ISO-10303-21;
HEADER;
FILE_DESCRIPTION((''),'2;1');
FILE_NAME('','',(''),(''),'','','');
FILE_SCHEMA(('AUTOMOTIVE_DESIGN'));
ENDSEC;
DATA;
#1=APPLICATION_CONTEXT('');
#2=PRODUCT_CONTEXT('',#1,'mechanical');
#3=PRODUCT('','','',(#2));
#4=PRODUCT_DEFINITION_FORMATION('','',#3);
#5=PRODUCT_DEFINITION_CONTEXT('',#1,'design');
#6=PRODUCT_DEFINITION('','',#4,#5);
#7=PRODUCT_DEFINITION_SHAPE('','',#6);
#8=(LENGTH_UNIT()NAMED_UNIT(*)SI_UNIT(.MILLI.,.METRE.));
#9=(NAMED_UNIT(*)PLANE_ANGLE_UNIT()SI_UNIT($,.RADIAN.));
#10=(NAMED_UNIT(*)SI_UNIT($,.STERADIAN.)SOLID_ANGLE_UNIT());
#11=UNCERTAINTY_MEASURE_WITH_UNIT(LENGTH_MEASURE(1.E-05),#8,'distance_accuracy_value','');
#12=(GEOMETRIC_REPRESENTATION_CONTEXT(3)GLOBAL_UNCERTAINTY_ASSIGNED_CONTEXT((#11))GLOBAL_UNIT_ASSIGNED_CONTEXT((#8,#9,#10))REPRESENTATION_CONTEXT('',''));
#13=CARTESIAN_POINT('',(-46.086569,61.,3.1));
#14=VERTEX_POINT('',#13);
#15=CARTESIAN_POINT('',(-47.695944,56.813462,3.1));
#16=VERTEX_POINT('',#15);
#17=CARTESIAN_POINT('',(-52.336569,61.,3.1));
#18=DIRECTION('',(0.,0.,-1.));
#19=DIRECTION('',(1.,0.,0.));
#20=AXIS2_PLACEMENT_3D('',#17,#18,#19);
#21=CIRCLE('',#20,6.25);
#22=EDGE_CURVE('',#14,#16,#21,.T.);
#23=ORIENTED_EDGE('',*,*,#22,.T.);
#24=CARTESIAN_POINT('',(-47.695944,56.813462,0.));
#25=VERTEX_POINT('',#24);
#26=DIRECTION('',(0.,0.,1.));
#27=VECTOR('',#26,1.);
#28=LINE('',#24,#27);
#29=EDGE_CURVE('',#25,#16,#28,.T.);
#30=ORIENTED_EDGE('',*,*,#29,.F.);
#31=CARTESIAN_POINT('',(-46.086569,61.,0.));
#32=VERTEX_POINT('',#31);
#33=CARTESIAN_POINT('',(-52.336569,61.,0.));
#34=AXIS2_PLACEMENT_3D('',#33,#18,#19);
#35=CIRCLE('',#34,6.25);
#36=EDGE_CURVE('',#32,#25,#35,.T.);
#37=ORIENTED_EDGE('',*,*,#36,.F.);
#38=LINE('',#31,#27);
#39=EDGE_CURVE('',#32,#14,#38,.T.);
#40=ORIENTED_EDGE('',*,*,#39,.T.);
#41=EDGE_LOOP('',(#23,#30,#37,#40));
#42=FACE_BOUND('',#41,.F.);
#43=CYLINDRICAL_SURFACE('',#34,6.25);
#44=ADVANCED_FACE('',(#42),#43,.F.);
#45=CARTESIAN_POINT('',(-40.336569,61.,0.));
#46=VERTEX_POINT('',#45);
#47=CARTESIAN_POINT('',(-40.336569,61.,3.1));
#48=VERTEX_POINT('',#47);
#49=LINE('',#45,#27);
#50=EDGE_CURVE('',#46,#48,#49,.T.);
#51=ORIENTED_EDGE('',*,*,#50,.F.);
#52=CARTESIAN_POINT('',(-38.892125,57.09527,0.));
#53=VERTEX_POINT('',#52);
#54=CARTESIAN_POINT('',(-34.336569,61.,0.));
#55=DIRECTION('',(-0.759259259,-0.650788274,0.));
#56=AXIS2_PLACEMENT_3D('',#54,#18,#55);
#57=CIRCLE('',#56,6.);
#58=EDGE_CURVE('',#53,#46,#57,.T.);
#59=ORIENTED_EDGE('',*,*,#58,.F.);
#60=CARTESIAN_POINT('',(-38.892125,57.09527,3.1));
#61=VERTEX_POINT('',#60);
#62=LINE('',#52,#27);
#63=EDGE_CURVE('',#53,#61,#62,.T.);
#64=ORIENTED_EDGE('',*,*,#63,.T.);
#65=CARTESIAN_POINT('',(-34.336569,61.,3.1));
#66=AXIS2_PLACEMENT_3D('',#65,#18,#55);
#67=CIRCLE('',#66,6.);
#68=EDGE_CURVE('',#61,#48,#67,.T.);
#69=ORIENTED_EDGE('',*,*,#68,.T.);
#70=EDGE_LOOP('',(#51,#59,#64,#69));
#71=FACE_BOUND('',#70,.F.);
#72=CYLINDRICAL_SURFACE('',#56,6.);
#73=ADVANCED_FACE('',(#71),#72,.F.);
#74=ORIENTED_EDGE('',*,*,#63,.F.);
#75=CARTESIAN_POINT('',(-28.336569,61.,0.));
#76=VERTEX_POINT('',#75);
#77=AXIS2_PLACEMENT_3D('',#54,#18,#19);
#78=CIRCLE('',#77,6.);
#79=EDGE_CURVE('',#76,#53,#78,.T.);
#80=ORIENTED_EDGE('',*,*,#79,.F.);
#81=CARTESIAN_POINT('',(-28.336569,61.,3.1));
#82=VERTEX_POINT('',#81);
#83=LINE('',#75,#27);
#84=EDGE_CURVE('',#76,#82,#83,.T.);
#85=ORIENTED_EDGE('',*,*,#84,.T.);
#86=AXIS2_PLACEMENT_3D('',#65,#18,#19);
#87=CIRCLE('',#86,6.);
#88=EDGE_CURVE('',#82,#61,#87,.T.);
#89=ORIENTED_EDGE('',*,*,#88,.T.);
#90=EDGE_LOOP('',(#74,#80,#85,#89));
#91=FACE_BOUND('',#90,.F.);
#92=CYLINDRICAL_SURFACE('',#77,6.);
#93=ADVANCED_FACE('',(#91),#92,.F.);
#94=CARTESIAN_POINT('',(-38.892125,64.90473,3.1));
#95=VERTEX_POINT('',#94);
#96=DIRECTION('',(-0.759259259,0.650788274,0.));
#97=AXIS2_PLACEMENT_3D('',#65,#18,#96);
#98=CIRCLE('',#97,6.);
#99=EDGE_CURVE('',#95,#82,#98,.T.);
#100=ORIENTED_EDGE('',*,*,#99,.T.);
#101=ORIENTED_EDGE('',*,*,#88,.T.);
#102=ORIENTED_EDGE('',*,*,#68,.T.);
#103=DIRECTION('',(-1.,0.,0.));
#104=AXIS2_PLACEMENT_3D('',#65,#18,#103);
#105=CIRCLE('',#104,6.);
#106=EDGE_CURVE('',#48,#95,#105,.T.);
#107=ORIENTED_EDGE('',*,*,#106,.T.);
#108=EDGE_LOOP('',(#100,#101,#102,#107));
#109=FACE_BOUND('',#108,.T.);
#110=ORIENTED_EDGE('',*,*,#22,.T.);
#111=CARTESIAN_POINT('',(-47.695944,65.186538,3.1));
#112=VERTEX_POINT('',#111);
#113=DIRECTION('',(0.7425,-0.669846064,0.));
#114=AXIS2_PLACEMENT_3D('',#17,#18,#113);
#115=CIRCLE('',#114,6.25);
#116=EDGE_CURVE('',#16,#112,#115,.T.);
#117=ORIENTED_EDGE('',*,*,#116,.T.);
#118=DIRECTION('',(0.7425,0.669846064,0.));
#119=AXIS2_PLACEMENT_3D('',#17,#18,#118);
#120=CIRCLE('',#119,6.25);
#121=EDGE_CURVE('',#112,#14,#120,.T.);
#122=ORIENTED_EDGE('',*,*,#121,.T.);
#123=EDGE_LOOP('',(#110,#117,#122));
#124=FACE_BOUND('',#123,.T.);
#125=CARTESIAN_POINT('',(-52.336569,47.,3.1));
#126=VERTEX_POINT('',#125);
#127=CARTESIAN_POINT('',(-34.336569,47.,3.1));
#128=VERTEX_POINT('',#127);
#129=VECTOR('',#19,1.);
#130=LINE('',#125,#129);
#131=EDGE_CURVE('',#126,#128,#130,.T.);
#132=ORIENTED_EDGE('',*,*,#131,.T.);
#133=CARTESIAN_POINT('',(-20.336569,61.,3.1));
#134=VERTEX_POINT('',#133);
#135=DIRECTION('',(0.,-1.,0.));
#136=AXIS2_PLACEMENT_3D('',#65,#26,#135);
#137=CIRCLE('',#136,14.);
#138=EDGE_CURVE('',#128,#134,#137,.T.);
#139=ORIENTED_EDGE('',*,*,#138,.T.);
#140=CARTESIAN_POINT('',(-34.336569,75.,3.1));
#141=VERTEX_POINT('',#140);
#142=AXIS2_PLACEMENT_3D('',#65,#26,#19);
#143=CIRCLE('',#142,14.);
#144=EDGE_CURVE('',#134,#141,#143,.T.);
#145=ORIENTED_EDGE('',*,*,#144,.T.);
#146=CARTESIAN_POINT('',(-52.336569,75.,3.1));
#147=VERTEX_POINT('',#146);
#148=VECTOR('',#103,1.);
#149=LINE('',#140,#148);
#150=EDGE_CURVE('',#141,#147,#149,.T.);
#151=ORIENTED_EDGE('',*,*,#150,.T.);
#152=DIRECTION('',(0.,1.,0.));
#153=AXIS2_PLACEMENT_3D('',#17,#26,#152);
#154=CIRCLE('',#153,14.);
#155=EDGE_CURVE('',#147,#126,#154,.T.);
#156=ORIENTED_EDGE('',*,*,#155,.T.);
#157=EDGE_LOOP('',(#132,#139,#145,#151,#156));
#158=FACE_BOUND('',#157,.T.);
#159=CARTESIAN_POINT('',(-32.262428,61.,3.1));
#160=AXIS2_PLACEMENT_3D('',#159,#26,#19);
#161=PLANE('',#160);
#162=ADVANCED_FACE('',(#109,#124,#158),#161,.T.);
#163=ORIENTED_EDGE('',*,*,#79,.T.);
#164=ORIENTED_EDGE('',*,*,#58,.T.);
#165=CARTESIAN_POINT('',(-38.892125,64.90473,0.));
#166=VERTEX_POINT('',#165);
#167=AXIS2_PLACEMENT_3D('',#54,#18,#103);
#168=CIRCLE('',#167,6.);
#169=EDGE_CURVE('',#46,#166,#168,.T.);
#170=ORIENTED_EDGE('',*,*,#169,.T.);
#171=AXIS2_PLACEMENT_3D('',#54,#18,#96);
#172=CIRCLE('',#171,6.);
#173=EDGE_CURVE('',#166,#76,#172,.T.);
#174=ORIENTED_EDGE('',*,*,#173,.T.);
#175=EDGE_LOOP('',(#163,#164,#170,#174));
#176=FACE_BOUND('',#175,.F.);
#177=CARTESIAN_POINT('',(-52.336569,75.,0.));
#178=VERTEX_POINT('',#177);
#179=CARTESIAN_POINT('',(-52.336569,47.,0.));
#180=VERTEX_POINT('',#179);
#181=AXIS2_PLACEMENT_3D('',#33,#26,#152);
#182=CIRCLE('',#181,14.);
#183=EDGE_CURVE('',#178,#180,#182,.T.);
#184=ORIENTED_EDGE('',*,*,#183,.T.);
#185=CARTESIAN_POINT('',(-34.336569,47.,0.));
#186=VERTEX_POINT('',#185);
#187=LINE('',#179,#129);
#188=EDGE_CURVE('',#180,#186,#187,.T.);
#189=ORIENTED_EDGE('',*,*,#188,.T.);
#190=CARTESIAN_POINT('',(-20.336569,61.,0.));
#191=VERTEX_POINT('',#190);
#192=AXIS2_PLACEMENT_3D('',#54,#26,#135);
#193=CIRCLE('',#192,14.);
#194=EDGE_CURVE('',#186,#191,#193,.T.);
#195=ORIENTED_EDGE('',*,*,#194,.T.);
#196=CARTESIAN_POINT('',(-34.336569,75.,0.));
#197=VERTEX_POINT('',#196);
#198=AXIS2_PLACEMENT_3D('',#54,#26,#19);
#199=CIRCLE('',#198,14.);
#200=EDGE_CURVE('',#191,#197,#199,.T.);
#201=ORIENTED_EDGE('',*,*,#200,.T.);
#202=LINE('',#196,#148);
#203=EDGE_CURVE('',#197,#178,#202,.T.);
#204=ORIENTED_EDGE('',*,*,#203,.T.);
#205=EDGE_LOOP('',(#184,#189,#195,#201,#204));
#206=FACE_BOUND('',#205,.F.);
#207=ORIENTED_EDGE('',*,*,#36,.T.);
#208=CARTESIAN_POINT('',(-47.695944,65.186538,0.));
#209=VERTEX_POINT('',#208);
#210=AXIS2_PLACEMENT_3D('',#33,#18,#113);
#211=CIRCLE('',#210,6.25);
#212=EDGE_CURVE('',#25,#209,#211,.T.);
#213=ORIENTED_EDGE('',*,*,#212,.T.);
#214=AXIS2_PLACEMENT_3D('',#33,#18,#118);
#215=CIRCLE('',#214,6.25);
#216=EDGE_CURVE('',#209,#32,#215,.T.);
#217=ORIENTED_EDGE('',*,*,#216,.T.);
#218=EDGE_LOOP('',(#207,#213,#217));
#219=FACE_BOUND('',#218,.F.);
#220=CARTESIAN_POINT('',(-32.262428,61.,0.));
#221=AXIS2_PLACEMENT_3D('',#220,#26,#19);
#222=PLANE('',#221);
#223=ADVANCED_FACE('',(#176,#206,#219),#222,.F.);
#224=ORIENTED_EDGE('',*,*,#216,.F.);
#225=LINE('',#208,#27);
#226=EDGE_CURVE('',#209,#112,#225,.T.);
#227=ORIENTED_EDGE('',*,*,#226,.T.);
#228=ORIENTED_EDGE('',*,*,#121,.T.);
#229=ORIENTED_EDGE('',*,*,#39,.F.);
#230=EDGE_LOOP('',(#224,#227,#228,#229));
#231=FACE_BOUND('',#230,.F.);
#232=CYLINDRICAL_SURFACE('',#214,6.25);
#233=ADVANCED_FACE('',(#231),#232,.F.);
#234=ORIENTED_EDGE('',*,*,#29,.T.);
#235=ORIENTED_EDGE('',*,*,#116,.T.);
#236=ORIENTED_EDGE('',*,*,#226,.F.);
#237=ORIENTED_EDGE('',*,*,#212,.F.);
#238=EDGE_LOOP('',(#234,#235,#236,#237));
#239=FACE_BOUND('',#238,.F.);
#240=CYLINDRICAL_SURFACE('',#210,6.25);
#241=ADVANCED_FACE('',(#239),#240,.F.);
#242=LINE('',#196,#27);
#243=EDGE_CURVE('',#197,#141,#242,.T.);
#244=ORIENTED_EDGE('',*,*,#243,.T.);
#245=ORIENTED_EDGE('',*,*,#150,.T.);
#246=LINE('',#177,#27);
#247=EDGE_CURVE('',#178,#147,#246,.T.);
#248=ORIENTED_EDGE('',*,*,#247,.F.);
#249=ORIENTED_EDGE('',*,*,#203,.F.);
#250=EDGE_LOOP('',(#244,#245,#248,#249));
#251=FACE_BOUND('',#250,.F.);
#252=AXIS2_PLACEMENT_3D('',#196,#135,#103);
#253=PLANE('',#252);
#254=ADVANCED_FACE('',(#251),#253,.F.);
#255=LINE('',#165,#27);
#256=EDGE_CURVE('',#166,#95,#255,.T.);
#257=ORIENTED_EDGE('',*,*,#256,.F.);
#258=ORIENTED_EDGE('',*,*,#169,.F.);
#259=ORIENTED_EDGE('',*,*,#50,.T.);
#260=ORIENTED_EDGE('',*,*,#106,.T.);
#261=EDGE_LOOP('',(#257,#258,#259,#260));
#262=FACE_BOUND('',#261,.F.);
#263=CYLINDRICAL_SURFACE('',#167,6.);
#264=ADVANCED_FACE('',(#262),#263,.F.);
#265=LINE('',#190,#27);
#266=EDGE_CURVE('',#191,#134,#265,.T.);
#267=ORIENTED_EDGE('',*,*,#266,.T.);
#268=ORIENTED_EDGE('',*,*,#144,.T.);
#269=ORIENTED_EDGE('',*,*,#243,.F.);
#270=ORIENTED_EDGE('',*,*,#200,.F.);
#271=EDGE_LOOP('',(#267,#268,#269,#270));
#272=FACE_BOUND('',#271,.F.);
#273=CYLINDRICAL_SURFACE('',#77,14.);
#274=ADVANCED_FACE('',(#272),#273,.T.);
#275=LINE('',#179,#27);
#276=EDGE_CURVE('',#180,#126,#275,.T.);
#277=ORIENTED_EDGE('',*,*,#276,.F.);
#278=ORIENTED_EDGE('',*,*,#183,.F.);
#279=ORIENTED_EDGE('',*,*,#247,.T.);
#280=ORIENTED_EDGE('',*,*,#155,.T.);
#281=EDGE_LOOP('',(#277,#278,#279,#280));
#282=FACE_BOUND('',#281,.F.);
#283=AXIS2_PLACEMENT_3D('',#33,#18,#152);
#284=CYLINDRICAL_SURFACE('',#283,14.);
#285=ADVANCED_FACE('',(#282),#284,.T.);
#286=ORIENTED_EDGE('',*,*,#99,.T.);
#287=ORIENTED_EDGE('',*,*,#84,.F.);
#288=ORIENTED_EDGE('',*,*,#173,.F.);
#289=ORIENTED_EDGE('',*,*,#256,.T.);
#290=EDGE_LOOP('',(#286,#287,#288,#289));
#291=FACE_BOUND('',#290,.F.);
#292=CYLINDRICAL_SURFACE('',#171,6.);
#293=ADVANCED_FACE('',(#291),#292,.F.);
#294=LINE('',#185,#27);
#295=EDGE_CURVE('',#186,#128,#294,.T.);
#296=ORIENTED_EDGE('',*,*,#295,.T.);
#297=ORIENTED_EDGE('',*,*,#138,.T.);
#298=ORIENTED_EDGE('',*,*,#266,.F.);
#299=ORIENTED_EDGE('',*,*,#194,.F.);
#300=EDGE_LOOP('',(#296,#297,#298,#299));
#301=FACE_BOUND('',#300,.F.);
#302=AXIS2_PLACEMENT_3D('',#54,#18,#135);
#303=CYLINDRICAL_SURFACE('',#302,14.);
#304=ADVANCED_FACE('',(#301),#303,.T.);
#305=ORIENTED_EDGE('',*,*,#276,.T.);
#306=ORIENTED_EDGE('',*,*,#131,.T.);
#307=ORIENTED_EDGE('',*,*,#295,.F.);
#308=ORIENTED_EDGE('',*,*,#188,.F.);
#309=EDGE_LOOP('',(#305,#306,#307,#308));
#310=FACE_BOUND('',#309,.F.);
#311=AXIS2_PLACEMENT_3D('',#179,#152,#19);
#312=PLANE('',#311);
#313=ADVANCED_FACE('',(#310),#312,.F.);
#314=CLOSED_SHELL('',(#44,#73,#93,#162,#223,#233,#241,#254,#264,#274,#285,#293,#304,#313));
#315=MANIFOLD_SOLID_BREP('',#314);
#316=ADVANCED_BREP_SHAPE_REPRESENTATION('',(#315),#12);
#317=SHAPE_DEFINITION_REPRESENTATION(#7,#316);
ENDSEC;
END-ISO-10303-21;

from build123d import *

# Parameters (mm, degrees)
F1_DEPTH = 3.1
F2_DEPTH = 3.1


# Not quite as in the source:
# - a feature names something its author has since deleted; it is built from what else it names


with BuildPart() as f1:
    # F0 (on Top) → F1 (new body)
    with BuildSketch(Plane.XY):
        with BuildLine():
            ThreePointArc((-38.8921249823, 64.9047296424), (-32.2549034273, 66.6273143387), (-28.3365694268, 61))
            ThreePointArc((-28.3365694268, 61), (-32.2549034273, 55.3726856613), (-38.8921249823, 57.0952703576))
            ThreePointArc((-38.8921249823, 57.0952703576), (-40.607834636, 53.3556046539), (-43.3365694268, 50.2761947052))
            ThreePointArc((-43.3365694268, 50.2761947052), (-39.1254485166, 47.8445206449), (-34.3365694268, 47))
            ThreePointArc((-34.3365694268, 47), (-24.4370744902, 51.1005050634), (-20.3365694268, 61))
            ThreePointArc((-20.3365694268, 61), (-24.4370744902, 70.8994949366), (-34.3365694268, 75))
            ThreePointArc((-34.3365694268, 75), (-39.1254485166, 74.1554793551), (-43.3365694268, 71.7238052948))
            ThreePointArc((-43.3365694268, 71.7238052948), (-40.607834636, 68.6443953461), (-38.8921249823, 64.9047296424))
        make_face()
        with BuildLine():
            ThreePointArc((-52.3365694268, 75), (-47.547690337, 74.1554793551), (-43.3365694268, 71.7238052948))
            ThreePointArc((-43.3365694268, 71.7238052948), (-39.1254485166, 74.1554793551), (-34.3365694268, 75))
            Line((-34.3365694268, 75), (-52.3365694268, 75))
        make_face()
        with BuildLine():
            ThreePointArc((-47.6959444268, 65.1865379025), (-45.9842893254, 68.7672788776), (-43.3365694268, 71.7238052948))
            ThreePointArc((-43.3365694268, 71.7238052948), (-47.547690337, 74.1554793551), (-52.3365694268, 75))
            ThreePointArc((-52.3365694268, 75), (-66.3365694268, 61), (-52.3365694268, 47))
            ThreePointArc((-52.3365694268, 47), (-47.547690337, 47.8445206449), (-43.3365694268, 50.2761947052))
            ThreePointArc((-43.3365694268, 50.2761947052), (-45.9842893254, 53.2327211224), (-47.6959444268, 56.8134620975))
            ThreePointArc((-47.6959444268, 56.8134620975), (-58.5865694268, 61), (-47.6959444268, 65.1865379025))
        make_face()
        with BuildLine():
            ThreePointArc((-34.3365694268, 47), (-39.1254485166, 47.8445206449), (-43.3365694268, 50.2761947052))
            ThreePointArc((-43.3365694268, 50.2761947052), (-47.547690337, 47.8445206449), (-52.3365694268, 47))
            Line((-52.3365694268, 47), (-34.3365694268, 47))
        make_face()
        with BuildLine():
            ThreePointArc((-40.3365694268, 61), (-39.9638837655, 63.0816659995), (-38.8921249823, 64.9047296424))
            ThreePointArc((-38.8921249823, 64.9047296424), (-40.607834636, 68.6443953461), (-43.3365694268, 71.7238052948))
            ThreePointArc((-43.3365694268, 71.7238052948), (-45.9842893254, 68.7672788776), (-47.6959444268, 65.1865379025))
            ThreePointArc((-47.6959444268, 65.1865379025), (-46.5027710822, 63.2426093898), (-46.0865694268, 61))
            Line((-46.0865694268, 61), (-40.3365694268, 61))
        make_face()
        with BuildLine():
            ThreePointArc((-43.3365694268, 50.2761947052), (-40.607834636, 53.3556046539), (-38.8921249823, 57.0952703576))
            ThreePointArc((-38.8921249823, 57.0952703576), (-39.9638837655, 58.9183340005), (-40.3365694268, 61))
            Line((-40.3365694268, 61), (-46.0865694268, 61))
            ThreePointArc((-46.0865694268, 61), (-46.5027710822, 58.7573906102), (-47.6959444268, 56.8134620975))
            ThreePointArc((-47.6959444268, 56.8134620975), (-45.9842893254, 53.2327211224), (-43.3365694268, 50.2761947052))
        make_face()
    extrude(amount=F1_DEPTH)

    # F0 (on Top) → F2 (join)
    with BuildSketch(Plane.XY):
        with BuildLine():
            ThreePointArc((-38.8921249823, 64.9047296424), (-32.2549034273, 66.6273143387), (-28.3365694268, 61))
            ThreePointArc((-28.3365694268, 61), (-32.2549034273, 55.3726856613), (-38.8921249823, 57.0952703576))
            ThreePointArc((-38.8921249823, 57.0952703576), (-40.607834636, 53.3556046539), (-43.3365694268, 50.2761947052))
            ThreePointArc((-43.3365694268, 50.2761947052), (-39.1254485166, 47.8445206449), (-34.3365694268, 47))
            ThreePointArc((-34.3365694268, 47), (-24.4370744902, 51.1005050634), (-20.3365694268, 61))
            ThreePointArc((-20.3365694268, 61), (-24.4370744902, 70.8994949366), (-34.3365694268, 75))
            ThreePointArc((-34.3365694268, 75), (-39.1254485166, 74.1554793551), (-43.3365694268, 71.7238052948))
            ThreePointArc((-43.3365694268, 71.7238052948), (-40.607834636, 68.6443953461), (-38.8921249823, 64.9047296424))
        make_face()
        with BuildLine():
            ThreePointArc((-52.3365694268, 75), (-47.547690337, 74.1554793551), (-43.3365694268, 71.7238052948))
            ThreePointArc((-43.3365694268, 71.7238052948), (-39.1254485166, 74.1554793551), (-34.3365694268, 75))
            Line((-34.3365694268, 75), (-52.3365694268, 75))
        make_face()
        with BuildLine():
            ThreePointArc((-47.6959444268, 65.1865379025), (-45.9842893254, 68.7672788776), (-43.3365694268, 71.7238052948))
            ThreePointArc((-43.3365694268, 71.7238052948), (-47.547690337, 74.1554793551), (-52.3365694268, 75))
            ThreePointArc((-52.3365694268, 75), (-66.3365694268, 61), (-52.3365694268, 47))
            ThreePointArc((-52.3365694268, 47), (-47.547690337, 47.8445206449), (-43.3365694268, 50.2761947052))
            ThreePointArc((-43.3365694268, 50.2761947052), (-45.9842893254, 53.2327211224), (-47.6959444268, 56.8134620975))
            ThreePointArc((-47.6959444268, 56.8134620975), (-58.5865694268, 61), (-47.6959444268, 65.1865379025))
        make_face()
        with BuildLine():
            ThreePointArc((-34.3365694268, 47), (-39.1254485166, 47.8445206449), (-43.3365694268, 50.2761947052))
            ThreePointArc((-43.3365694268, 50.2761947052), (-47.547690337, 47.8445206449), (-52.3365694268, 47))
            Line((-52.3365694268, 47), (-34.3365694268, 47))
        make_face()
    extrude(amount=F2_DEPTH)


solid = f1.part
